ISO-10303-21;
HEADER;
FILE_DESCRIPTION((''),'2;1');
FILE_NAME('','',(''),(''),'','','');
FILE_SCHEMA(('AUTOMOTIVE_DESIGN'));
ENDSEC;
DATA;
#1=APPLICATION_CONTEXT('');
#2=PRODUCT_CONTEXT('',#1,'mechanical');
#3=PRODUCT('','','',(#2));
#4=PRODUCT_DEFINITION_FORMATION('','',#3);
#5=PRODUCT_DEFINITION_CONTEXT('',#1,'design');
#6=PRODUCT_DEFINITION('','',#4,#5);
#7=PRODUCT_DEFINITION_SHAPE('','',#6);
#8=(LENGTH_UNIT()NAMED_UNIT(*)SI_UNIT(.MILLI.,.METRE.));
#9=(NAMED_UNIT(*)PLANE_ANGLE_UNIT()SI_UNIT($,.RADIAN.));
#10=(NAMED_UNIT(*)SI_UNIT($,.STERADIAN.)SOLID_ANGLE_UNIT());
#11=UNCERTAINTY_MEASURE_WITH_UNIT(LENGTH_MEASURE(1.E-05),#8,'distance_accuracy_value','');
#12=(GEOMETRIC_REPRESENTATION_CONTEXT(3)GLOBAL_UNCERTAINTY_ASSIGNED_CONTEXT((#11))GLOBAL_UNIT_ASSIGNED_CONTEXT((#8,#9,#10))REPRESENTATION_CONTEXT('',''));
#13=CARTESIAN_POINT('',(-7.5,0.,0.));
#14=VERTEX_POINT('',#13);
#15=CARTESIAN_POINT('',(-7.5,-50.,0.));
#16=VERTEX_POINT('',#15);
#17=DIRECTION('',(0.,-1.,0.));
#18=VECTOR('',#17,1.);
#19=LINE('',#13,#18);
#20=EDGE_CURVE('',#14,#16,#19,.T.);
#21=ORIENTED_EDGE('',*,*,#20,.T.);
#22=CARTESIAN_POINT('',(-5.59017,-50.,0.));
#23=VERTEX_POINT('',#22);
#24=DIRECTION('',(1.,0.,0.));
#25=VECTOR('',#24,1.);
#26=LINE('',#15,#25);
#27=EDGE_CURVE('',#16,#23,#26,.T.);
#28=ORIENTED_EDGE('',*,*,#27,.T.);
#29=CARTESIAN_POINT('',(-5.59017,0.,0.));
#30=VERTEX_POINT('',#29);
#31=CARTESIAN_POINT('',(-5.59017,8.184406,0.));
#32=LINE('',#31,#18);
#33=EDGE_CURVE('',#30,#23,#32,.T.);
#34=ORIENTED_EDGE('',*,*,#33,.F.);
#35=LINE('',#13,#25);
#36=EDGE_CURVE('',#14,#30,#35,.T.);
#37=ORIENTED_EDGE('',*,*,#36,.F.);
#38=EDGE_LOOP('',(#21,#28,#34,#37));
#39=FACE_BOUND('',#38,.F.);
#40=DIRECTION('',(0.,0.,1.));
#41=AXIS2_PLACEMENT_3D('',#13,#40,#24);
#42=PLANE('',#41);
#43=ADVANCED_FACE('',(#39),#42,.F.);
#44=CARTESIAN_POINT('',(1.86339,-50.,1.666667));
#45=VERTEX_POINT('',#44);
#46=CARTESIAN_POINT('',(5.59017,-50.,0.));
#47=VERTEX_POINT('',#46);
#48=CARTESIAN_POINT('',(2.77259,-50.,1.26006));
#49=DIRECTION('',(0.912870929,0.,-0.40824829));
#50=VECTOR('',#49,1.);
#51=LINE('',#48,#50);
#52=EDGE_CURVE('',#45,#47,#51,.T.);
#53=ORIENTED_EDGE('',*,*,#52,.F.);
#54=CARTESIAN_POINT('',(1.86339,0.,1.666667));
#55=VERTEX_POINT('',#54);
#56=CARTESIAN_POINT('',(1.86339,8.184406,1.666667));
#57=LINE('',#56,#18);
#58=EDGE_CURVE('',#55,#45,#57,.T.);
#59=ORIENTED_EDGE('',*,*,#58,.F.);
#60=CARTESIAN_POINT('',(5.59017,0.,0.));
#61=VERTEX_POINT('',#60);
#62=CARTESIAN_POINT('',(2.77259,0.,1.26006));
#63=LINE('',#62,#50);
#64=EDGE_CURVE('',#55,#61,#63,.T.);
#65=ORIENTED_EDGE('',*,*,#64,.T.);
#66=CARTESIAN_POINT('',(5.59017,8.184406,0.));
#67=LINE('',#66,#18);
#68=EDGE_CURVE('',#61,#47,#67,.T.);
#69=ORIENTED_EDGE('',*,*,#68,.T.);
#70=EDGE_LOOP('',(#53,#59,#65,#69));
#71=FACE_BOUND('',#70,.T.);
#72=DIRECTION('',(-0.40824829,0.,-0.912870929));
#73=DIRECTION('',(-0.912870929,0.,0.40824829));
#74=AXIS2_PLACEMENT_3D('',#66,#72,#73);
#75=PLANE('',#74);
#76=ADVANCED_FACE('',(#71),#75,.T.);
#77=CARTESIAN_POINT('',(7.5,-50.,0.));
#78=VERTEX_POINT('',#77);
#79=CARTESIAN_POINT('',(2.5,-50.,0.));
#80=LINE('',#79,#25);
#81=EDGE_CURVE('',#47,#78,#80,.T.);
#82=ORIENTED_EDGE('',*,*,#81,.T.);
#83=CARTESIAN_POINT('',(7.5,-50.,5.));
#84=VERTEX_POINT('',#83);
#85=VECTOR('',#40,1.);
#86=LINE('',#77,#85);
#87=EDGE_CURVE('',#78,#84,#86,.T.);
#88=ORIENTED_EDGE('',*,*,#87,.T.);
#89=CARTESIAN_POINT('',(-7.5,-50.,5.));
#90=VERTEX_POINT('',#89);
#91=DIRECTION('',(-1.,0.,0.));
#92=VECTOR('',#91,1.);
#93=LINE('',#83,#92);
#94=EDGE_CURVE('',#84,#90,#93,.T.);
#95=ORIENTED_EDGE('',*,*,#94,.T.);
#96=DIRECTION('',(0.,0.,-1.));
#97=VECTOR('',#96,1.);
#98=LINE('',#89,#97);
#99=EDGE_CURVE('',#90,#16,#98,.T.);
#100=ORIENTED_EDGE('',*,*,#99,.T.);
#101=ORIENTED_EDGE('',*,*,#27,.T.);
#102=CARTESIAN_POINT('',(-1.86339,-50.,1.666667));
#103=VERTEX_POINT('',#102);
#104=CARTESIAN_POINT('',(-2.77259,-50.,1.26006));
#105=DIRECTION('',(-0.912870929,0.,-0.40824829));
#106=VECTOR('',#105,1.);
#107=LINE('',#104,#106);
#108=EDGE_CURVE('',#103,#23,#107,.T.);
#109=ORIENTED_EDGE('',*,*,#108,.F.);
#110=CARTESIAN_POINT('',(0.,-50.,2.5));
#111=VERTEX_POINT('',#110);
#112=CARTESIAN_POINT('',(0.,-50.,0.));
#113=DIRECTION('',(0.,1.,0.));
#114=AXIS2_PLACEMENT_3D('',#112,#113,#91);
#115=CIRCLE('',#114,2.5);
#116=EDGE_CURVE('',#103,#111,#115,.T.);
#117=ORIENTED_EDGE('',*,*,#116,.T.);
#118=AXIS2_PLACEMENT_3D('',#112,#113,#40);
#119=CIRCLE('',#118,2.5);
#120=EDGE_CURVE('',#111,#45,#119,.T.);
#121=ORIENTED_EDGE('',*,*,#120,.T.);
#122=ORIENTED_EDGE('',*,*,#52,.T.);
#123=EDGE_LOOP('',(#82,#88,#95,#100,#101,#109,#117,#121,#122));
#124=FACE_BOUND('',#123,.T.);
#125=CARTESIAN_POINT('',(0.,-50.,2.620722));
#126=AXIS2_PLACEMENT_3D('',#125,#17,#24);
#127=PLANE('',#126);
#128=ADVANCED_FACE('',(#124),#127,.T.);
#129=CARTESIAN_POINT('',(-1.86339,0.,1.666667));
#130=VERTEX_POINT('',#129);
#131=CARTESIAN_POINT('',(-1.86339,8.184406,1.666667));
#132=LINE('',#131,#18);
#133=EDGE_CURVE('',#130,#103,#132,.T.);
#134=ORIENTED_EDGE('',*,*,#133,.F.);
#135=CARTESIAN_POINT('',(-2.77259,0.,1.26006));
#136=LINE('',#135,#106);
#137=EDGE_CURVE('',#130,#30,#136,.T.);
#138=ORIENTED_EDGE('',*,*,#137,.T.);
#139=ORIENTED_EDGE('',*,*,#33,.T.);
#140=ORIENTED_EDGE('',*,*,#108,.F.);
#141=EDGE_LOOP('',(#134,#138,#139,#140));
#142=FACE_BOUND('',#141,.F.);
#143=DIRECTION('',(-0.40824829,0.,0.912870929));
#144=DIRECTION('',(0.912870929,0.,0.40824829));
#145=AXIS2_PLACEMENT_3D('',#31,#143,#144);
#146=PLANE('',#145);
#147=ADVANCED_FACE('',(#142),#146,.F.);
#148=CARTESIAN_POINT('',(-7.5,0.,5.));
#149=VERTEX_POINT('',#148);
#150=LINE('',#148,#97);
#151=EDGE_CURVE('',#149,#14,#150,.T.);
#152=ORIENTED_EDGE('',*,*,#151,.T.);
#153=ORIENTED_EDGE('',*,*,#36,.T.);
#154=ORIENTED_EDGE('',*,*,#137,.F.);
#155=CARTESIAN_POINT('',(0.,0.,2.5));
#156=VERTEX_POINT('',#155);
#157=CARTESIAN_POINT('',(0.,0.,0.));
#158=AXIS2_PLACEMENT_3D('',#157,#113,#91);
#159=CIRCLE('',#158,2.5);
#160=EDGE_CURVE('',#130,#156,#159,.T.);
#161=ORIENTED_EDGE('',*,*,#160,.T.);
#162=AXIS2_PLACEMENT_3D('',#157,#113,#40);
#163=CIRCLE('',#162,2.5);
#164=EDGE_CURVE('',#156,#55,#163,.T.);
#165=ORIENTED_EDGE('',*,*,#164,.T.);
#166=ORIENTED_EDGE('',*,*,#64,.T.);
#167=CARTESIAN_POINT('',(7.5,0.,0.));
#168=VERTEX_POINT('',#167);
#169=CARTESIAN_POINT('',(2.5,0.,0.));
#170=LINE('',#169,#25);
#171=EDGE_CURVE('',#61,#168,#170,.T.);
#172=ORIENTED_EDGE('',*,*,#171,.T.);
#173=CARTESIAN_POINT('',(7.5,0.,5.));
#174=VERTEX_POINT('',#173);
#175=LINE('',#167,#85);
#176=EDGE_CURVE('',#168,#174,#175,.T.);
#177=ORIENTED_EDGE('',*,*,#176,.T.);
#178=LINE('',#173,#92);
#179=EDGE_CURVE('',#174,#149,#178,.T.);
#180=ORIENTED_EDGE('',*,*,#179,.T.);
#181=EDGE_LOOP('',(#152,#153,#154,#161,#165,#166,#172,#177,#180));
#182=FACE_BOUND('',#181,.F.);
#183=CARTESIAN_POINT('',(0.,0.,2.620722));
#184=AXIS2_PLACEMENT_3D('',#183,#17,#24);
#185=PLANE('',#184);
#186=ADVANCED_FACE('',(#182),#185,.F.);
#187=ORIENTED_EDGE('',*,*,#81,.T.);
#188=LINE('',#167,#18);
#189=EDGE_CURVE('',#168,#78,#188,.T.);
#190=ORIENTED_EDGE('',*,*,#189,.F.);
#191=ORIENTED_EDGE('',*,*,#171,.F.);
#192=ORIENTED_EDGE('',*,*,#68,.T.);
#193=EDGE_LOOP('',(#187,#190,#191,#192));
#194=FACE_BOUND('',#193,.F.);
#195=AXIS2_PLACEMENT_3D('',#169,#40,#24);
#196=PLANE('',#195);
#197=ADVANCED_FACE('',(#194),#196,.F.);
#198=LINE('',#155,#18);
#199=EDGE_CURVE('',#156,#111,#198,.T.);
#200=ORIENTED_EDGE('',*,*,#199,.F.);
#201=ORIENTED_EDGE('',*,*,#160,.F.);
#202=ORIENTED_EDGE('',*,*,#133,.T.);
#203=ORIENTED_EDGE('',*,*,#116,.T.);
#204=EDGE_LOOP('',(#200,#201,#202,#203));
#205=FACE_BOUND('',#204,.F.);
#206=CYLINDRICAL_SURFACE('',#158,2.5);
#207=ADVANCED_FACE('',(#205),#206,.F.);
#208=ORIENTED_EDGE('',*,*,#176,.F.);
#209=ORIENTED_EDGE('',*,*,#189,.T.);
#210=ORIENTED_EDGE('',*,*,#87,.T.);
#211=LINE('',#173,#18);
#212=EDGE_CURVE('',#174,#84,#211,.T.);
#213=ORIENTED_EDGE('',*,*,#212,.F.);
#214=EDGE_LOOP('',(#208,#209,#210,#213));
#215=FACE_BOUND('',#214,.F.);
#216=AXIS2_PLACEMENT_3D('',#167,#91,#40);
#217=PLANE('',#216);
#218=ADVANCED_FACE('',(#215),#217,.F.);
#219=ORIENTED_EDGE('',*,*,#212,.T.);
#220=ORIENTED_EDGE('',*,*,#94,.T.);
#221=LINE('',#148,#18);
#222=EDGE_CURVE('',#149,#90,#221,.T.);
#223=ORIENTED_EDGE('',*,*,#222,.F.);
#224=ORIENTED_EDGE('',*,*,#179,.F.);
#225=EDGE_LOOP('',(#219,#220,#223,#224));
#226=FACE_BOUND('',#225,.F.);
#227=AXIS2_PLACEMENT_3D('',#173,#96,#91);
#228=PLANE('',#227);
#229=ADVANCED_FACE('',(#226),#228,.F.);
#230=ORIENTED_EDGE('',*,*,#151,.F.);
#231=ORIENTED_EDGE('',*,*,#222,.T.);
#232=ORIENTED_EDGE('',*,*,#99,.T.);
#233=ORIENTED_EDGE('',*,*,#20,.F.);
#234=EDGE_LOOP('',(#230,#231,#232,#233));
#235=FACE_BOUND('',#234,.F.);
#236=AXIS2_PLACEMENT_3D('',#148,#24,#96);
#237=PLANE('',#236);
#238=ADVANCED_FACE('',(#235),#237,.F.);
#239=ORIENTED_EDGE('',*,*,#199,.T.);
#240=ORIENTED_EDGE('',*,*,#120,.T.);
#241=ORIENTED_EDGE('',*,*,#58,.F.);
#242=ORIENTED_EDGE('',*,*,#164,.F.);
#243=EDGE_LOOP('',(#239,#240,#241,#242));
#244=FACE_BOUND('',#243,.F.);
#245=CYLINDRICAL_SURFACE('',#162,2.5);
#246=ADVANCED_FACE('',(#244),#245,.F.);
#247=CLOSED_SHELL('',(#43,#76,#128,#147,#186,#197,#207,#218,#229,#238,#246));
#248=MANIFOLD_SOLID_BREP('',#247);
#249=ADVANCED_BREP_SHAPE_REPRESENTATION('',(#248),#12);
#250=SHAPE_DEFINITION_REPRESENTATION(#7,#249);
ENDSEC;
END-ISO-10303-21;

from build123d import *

# Parameters (mm, degrees)
F1_DEPTH    = 50
F2_T1_DEPTH = 66.3688124221


# Not quite as in the source:
# - a fillet or chamfer that OpenCascade refuses, or shapes differently, is made with other operations: its cross-section is extruded or revolved along the edge and cut away or added


with BuildPart() as f1:
    # F0 (on Front) → F1 (new body)
    with BuildSketch(Plane.XZ):
        with BuildLine():
            Line((7.5, 5), (0, 5))
            Line((0, 5), (-7.5, 5))
            Line((-7.5, 5), (-7.5, 0))
            Line((-7.5, 0), (-2.5, 0))
            ThreePointArc((-2.5, 0), (-1.767766953, 1.767766953), (0, 2.5))
            ThreePointArc((0, 2.5), (1.767766953, 1.767766953), (2.5, 0))
            Line((2.5, 0), (7.5, 0))
            Line((7.5, 0), (7.5, 5))
        make_face()
    extrude(amount=F1_DEPTH)

    # F2: chamfer of 5 on 2 edges, made by hand

    # F2_s2 → F2_t1 (cut)
    with BuildSketch(Plane.XZ.offset(-8.1844062111)):
        with BuildLine():
            Line((-5.5901699437, 0), (-1.8633899812, 1.6666666667))
            ThreePointArc((-1.8633899812, 1.6666666667), (-2.3064545677, 0.9645036688), (-2.5, 0))
            Line((-2.5, 0), (-5.5901699437, 0))
        make_face()
        with BuildLine():
            Line((5.5901699437, 0), (1.8633899812, 1.6666666667))
            ThreePointArc((1.8633899812, 1.6666666667), (2.3064545677, 0.9645036688), (2.5, 0))
            Line((2.5, 0), (5.5901699437, 0))
        make_face()
    extrude(amount=F2_T1_DEPTH, mode=Mode.SUBTRACT)


solid = f1.part
